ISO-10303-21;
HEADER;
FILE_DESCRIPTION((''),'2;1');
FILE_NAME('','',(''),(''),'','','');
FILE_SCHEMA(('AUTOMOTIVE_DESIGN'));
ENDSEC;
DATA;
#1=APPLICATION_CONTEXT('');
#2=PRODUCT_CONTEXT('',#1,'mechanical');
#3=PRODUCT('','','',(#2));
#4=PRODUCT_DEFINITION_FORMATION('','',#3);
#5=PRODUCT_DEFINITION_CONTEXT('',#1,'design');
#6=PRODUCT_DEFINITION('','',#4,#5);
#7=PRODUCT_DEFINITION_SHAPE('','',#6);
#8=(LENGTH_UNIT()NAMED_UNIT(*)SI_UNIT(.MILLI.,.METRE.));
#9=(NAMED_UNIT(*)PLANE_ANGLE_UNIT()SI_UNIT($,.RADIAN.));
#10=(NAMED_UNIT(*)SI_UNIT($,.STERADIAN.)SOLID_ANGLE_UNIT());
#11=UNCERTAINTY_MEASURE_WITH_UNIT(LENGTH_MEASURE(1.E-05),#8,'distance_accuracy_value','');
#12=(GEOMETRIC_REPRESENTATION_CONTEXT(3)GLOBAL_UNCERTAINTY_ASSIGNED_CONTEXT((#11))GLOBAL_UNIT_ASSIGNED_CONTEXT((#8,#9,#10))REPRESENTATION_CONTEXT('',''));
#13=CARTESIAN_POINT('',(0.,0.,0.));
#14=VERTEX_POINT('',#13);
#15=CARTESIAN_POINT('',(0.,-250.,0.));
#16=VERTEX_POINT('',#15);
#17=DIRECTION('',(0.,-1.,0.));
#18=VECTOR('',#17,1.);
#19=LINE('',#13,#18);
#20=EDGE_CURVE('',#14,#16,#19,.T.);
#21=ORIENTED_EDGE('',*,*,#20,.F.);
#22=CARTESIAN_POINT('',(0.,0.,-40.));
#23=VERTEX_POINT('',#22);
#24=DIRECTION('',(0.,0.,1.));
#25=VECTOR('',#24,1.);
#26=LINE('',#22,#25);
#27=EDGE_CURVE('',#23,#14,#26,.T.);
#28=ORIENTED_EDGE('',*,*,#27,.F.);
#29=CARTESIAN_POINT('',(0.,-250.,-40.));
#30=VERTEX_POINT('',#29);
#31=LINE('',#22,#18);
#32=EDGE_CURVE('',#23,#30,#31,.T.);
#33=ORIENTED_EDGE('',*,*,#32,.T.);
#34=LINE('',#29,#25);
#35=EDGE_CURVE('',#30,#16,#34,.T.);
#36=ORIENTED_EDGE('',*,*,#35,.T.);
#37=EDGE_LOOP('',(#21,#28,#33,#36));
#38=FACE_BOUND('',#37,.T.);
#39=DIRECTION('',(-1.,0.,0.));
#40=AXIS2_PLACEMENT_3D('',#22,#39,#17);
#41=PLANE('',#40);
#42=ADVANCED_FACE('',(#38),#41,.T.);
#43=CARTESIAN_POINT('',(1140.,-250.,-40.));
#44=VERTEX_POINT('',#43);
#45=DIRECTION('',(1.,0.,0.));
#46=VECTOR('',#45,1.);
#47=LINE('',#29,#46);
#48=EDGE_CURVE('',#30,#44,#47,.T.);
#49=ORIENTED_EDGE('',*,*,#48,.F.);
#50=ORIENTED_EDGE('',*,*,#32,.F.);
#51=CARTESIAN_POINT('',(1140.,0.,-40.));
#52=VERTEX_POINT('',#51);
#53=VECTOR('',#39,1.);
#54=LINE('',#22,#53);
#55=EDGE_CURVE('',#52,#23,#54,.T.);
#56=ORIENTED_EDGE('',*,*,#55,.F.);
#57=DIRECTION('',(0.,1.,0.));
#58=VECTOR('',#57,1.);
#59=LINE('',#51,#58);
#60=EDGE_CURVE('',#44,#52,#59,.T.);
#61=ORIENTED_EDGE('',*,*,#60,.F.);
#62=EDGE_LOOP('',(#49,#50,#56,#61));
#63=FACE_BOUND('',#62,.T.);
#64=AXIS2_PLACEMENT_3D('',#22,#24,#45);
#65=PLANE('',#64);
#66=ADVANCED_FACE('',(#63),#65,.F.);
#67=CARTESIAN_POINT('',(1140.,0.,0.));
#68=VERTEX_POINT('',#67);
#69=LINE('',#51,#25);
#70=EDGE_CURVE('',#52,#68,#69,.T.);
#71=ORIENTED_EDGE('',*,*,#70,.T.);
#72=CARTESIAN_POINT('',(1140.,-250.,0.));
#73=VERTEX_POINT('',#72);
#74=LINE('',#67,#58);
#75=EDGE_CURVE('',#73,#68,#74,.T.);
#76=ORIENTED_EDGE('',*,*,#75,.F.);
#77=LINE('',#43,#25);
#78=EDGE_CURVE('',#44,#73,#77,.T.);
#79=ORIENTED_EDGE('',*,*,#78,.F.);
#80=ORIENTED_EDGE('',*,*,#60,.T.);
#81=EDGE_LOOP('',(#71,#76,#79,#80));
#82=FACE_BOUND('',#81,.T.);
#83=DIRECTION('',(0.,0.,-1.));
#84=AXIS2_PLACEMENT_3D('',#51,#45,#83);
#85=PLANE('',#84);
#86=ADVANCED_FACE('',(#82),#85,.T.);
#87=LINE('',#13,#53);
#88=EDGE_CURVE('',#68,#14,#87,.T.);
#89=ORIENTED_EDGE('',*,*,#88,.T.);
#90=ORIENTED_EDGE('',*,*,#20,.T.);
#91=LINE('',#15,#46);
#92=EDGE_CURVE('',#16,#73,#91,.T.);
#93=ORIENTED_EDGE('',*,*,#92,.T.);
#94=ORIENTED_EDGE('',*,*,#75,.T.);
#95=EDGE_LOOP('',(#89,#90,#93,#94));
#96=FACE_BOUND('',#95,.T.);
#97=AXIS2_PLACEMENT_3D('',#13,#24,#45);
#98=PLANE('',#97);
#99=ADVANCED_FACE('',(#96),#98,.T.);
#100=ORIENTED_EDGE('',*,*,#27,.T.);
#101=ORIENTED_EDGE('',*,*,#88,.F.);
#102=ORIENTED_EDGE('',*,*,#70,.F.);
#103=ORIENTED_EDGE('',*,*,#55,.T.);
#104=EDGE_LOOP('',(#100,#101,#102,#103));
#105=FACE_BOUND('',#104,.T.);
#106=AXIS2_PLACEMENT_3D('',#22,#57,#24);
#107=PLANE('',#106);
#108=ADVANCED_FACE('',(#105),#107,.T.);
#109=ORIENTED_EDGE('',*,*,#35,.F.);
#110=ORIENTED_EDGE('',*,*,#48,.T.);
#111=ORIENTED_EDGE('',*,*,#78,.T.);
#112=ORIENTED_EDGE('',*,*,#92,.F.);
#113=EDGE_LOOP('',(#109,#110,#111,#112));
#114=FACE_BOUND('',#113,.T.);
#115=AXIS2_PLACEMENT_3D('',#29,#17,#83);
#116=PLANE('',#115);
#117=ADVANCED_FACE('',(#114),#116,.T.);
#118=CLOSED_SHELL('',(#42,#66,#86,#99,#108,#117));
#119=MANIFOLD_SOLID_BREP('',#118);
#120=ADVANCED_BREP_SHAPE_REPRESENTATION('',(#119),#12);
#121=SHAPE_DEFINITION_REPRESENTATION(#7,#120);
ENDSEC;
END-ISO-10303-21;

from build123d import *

# Parameters (mm, degrees)
IZIM1_W            = 1140
IZIM1_H            = 250
TABAN_FLAN_1_DEPTH = 40


# Sheet-metal steps are written as plain solids
with BuildPart() as part:
    # Çizim1 → Taban-Flanş1 (new body)
    with BuildSketch(Plane.XY):
        with Locations((570, -125)):
            Rectangle(IZIM1_W, IZIM1_H)
    extrude(amount=-TABAN_FLAN_1_DEPTH)


solid = part.part
